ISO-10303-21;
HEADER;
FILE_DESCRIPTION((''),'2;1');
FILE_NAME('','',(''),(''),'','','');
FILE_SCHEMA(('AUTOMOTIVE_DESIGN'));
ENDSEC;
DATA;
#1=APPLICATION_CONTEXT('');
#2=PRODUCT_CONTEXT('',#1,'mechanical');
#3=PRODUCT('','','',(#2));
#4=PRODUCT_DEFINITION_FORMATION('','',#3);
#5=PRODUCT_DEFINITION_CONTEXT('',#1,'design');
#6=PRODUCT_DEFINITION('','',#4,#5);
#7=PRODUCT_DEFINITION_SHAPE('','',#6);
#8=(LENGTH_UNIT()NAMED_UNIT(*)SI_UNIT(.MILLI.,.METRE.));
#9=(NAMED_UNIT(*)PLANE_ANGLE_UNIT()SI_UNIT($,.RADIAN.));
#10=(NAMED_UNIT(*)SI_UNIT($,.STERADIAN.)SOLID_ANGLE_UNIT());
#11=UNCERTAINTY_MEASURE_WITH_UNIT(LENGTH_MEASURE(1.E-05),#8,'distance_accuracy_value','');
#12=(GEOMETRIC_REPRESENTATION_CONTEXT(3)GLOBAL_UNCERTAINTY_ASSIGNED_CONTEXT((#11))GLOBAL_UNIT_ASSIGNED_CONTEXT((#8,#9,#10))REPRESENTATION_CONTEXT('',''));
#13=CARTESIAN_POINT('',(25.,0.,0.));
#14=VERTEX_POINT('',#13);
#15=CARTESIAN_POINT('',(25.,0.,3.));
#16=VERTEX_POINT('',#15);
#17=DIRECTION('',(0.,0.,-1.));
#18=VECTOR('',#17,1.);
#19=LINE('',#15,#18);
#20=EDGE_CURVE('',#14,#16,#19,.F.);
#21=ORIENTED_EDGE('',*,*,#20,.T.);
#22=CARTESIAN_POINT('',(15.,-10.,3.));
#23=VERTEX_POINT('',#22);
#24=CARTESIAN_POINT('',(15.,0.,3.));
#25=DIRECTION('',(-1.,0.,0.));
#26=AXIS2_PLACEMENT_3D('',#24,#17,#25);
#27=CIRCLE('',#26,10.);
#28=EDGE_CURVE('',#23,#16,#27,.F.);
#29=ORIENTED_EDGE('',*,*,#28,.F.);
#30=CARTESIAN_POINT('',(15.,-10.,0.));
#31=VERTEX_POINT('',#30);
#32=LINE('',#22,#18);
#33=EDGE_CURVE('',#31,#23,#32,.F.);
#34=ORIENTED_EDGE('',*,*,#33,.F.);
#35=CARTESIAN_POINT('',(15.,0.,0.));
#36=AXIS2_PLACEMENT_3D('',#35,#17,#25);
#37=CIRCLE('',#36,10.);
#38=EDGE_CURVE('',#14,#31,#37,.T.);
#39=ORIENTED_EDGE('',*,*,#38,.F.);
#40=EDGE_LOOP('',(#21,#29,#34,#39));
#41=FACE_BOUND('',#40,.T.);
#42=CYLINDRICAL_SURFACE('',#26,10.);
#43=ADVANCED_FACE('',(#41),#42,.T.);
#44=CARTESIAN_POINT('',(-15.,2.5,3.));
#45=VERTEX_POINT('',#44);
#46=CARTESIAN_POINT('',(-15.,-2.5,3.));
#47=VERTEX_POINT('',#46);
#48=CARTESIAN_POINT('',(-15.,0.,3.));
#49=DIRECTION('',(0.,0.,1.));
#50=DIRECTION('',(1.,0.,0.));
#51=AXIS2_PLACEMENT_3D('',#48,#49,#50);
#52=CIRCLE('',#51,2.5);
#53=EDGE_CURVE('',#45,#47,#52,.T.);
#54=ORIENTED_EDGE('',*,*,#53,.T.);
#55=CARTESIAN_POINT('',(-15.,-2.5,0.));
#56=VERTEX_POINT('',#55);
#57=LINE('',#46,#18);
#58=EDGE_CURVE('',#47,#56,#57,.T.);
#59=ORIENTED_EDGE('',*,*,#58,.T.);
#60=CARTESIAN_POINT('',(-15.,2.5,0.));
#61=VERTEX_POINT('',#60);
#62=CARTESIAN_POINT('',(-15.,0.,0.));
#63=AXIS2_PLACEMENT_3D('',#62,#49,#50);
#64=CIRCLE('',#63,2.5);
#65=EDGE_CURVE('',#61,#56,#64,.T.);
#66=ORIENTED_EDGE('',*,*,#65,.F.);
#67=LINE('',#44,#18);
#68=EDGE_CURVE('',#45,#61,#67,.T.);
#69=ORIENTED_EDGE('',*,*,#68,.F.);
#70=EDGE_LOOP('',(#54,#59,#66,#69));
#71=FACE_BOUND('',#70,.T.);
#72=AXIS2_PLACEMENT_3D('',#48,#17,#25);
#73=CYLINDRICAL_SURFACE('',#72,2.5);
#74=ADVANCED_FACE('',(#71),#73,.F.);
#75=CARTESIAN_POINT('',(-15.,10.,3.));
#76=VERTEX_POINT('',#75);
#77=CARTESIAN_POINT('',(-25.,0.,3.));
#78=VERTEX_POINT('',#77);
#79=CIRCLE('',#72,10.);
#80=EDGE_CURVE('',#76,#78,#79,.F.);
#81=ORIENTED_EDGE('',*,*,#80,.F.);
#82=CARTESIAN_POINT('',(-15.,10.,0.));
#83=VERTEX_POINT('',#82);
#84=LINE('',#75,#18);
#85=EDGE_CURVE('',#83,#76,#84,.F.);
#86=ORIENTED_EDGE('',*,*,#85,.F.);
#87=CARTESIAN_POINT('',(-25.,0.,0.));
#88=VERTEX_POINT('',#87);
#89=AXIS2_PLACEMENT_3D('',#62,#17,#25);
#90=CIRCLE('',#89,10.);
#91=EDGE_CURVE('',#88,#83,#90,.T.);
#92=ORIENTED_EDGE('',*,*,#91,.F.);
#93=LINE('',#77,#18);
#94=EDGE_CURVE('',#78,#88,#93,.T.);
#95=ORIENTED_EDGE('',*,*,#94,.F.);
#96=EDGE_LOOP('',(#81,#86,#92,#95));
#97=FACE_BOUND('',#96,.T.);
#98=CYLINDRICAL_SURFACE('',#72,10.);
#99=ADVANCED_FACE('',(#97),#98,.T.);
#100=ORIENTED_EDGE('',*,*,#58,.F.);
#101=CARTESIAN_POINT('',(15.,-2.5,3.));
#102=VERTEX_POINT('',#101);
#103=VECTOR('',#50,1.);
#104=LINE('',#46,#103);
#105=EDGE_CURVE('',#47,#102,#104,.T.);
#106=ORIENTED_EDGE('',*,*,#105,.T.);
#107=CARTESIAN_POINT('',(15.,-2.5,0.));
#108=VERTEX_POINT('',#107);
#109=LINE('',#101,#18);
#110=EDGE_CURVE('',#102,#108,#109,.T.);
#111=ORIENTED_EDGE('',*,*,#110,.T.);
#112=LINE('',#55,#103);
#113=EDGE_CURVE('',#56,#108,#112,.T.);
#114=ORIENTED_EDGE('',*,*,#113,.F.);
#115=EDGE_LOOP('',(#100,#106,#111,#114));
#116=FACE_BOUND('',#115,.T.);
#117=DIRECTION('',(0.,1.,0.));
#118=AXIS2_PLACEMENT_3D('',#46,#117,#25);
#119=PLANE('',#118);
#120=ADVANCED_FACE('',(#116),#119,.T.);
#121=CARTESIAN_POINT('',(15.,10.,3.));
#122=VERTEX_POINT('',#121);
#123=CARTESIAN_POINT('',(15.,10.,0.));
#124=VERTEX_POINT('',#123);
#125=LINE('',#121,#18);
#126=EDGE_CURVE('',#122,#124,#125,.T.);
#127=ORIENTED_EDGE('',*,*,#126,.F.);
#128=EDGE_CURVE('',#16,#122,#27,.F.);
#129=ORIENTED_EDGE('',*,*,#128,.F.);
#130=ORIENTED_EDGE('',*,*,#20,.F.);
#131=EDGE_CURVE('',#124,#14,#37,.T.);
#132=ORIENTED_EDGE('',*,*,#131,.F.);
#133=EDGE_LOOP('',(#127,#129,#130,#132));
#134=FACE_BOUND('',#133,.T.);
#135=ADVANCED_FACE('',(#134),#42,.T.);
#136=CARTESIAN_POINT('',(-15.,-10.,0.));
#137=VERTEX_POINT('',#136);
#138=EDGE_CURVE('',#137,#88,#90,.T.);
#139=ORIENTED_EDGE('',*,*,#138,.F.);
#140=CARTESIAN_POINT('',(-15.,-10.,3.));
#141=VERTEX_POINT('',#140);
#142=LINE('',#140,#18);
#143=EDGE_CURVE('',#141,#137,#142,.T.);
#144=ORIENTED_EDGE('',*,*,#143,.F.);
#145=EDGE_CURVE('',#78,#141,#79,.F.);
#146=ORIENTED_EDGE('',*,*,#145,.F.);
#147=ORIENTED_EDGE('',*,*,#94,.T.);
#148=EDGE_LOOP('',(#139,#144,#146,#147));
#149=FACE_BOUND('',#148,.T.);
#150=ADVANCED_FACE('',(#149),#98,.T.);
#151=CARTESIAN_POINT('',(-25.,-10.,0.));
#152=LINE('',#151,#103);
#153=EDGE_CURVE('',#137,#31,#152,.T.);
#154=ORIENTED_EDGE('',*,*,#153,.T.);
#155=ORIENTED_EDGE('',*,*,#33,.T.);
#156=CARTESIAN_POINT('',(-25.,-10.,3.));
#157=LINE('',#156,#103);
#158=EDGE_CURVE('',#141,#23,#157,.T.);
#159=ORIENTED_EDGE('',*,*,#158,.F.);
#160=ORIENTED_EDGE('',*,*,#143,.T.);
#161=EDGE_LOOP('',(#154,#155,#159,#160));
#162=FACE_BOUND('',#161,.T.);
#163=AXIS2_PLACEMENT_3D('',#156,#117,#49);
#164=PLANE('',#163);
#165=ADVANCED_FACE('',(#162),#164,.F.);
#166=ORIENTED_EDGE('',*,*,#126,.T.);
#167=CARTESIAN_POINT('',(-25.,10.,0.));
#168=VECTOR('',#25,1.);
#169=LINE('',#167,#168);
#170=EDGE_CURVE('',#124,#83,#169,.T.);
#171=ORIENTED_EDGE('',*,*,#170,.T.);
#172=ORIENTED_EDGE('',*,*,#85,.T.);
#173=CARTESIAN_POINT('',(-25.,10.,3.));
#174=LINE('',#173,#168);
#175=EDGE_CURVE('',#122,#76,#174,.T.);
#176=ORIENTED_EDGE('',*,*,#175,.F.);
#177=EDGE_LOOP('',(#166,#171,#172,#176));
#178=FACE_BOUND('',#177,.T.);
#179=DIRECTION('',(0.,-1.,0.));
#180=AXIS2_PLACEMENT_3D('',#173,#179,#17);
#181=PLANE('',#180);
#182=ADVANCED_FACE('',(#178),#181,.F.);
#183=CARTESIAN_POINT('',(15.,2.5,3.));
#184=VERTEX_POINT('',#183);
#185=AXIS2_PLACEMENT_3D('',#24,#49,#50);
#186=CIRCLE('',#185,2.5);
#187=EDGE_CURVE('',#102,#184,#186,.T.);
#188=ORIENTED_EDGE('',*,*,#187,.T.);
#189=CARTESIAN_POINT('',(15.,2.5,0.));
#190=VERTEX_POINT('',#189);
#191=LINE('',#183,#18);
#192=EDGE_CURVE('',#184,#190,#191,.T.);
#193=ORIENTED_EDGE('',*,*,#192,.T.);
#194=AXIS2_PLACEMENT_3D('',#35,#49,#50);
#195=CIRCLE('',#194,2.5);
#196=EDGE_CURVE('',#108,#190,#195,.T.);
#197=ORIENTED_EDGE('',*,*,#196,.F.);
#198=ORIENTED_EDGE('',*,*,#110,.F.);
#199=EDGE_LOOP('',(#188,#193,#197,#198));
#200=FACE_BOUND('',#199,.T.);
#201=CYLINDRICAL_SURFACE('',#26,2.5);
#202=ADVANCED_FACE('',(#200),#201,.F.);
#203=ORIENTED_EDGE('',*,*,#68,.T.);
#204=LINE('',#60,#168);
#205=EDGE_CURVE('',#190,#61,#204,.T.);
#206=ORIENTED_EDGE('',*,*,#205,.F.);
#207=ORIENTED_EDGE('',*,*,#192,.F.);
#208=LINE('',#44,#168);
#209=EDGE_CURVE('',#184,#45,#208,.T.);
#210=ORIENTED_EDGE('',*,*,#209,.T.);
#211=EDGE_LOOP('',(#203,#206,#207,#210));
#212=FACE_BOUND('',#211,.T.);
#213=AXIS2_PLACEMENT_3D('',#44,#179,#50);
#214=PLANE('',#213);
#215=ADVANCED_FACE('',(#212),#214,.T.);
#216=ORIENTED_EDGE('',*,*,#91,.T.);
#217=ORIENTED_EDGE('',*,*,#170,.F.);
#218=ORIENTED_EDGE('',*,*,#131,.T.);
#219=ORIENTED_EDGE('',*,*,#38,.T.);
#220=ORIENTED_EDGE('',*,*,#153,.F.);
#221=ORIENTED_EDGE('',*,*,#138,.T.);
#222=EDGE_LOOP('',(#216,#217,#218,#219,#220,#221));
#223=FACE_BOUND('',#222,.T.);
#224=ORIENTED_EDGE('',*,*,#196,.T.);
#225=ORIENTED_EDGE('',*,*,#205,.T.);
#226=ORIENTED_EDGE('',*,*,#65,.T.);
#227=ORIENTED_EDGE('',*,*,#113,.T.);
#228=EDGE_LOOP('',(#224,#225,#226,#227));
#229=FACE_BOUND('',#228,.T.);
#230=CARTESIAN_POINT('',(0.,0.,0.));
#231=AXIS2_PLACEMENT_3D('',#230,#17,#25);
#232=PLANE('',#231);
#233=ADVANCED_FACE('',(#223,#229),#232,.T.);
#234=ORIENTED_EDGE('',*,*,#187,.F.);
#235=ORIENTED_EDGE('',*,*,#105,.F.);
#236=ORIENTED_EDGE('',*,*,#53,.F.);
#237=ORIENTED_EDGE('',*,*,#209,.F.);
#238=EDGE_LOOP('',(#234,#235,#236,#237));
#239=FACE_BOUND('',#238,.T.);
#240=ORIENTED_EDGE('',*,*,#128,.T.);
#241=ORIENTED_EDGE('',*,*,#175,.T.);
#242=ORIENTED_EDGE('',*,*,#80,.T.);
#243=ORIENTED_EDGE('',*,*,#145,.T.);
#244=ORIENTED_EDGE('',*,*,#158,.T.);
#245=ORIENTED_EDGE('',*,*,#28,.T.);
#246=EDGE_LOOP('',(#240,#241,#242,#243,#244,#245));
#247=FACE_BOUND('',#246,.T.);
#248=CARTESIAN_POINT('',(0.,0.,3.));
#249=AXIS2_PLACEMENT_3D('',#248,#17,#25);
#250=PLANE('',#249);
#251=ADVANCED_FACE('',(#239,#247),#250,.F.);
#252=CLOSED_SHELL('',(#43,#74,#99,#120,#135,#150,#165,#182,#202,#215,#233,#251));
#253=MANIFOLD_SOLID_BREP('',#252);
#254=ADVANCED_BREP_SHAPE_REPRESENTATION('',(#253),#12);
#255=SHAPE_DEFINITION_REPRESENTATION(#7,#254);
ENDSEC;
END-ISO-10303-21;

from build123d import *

# Parameters (mm, degrees)
SKETCH2_W           = 50
SKETCH2_H           = 20
BOSS_EXTRUDE1_DEPTH = 3
FILLET1_R           = 10


with BuildPart() as part:
    # Sketch2 → Boss-Extrude1 (new body)
    with BuildSketch(Plane.XY):
        Rectangle(SKETCH2_W, SKETCH2_H)
        with BuildLine():
            Line((-15, 2.5), (15, 2.5))
            ThreePointArc((15, 2.5), (17.5, 0), (15, -2.5))
            Line((15, -2.5), (-15, -2.5))
            ThreePointArc((-15, -2.5), (-17.5, 0), (-15, 2.5))
        make_face(mode=Mode.SUBTRACT)
    extrude(amount=BOSS_EXTRUDE1_DEPTH)

    # Fillet1
    fillet1_edges = [part.edges().sort_by_distance(p)[0] for p in [
        (25, -10, 1.5),
        (-25, -10, 1.5),
        (-25, 10, 1.5),
        (25, 10, 1.5),
    ]]
    fillet(fillet1_edges, radius=FILLET1_R - 0.0001)  # a hair under: the kernel refuses the full size


solid = part.part
